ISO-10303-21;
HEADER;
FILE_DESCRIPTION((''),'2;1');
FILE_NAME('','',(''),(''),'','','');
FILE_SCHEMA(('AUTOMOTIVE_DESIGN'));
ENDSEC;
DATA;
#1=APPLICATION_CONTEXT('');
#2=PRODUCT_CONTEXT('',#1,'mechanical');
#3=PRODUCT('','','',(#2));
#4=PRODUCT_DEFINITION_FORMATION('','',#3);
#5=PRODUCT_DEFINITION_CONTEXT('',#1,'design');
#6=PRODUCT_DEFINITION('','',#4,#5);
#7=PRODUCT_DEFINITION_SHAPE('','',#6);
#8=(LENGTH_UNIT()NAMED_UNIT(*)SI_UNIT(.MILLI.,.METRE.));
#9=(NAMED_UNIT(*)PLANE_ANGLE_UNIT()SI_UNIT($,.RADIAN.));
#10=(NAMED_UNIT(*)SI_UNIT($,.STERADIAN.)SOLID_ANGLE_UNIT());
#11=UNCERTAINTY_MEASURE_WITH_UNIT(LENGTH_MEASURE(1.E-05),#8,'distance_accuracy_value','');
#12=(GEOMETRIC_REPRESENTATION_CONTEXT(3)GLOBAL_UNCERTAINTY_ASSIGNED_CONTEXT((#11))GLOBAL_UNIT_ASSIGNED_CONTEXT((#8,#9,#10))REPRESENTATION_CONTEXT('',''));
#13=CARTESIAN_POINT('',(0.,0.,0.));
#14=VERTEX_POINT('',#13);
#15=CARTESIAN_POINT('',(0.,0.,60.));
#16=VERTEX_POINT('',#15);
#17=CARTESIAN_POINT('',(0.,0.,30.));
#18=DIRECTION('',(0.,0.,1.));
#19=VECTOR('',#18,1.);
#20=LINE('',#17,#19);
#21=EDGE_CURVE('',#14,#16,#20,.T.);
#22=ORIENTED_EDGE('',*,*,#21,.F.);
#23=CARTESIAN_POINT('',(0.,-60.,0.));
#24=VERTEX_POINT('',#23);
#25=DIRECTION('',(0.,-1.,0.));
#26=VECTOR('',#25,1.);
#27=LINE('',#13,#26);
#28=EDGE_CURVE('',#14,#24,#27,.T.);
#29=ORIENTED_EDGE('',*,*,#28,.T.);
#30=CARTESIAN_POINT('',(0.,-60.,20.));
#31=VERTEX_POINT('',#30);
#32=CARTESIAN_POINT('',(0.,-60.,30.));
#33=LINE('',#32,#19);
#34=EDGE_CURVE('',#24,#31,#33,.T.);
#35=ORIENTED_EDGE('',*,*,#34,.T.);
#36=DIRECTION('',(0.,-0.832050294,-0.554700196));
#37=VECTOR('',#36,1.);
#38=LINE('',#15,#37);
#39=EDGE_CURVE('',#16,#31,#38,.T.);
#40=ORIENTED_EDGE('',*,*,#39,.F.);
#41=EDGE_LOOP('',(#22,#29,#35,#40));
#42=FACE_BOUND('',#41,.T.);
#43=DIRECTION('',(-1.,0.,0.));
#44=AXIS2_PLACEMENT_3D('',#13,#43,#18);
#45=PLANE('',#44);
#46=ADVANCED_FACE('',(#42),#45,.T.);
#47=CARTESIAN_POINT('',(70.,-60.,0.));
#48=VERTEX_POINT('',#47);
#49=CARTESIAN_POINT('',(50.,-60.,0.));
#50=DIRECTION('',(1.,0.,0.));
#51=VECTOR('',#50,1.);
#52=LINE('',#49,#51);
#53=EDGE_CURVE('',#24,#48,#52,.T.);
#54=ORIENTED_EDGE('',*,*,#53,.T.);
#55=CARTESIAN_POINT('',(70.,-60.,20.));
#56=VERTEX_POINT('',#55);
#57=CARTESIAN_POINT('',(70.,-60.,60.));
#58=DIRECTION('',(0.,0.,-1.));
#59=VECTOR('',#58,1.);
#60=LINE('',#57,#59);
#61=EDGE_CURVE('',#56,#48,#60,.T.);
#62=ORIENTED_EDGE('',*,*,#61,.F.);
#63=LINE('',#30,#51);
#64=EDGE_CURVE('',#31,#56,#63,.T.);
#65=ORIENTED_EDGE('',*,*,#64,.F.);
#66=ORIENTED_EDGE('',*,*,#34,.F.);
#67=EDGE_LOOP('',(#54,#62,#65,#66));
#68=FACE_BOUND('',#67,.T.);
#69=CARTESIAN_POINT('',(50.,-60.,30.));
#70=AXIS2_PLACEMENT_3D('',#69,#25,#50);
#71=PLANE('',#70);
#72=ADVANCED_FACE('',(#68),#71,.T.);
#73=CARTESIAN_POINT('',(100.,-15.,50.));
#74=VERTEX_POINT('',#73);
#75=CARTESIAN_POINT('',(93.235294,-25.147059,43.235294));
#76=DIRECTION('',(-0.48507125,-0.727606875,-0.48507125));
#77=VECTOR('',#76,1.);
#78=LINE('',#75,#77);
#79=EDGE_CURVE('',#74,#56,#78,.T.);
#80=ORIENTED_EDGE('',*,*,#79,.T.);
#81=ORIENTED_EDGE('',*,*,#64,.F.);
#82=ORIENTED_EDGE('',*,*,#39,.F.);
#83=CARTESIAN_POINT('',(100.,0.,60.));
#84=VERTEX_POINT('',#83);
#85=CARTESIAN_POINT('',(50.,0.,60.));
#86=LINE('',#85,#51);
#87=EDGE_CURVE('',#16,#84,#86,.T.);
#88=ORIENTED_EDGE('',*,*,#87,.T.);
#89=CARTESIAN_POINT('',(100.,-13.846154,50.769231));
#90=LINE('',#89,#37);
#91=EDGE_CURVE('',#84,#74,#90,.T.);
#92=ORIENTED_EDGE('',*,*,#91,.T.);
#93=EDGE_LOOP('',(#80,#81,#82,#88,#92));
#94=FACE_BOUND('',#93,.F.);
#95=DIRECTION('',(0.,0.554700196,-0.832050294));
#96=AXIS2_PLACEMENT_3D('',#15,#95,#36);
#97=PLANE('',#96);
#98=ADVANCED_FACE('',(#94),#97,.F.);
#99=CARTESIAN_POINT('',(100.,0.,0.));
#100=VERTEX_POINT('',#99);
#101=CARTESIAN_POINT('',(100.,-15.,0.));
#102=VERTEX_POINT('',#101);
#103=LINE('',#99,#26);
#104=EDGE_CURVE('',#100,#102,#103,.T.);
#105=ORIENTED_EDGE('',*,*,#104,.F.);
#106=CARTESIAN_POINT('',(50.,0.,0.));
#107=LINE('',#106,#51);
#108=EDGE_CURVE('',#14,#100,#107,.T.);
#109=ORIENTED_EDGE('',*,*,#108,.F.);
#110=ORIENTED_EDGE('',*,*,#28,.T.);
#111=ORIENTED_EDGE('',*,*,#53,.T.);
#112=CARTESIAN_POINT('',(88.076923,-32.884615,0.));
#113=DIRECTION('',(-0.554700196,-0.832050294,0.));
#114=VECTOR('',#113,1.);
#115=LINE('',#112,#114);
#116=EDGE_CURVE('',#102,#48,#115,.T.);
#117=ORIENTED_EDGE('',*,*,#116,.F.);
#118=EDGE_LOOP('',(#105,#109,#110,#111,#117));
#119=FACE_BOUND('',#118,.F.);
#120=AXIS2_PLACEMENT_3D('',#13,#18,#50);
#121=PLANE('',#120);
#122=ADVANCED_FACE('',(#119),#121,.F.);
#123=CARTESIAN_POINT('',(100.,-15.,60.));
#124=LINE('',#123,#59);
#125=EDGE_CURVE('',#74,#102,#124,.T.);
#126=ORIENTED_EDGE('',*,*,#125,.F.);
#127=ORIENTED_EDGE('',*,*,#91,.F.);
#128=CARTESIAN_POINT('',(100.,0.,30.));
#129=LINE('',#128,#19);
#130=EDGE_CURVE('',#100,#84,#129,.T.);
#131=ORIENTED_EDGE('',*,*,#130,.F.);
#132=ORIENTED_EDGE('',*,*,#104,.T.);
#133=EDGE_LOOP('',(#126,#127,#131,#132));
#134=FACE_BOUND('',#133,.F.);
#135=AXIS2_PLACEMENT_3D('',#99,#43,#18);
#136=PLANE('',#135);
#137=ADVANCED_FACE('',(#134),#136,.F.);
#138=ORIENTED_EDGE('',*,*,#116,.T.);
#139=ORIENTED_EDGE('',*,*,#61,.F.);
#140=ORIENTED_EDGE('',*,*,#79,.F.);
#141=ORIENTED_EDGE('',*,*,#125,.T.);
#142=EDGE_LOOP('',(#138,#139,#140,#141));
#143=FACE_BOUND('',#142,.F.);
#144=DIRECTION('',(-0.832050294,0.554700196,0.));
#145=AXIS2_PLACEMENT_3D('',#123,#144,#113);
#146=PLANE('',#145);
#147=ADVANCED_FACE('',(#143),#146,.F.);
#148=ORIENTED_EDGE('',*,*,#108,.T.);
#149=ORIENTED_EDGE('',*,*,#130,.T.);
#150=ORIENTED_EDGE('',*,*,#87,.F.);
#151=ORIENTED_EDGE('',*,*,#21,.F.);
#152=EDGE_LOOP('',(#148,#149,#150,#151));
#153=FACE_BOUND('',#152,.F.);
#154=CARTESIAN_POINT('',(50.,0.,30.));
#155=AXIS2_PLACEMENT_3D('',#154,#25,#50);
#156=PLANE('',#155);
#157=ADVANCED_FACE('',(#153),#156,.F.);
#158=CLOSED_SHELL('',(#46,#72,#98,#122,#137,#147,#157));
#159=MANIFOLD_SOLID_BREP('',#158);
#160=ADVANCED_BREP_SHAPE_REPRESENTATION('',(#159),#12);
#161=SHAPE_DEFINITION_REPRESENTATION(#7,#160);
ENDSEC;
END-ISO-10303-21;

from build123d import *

# Parameters (mm, degrees)
F0_W     = 100
F0_H     = 60
F1_DEPTH = 60
F4_DEPTH = 60.001
F5_DEPTH = 100.001


# Not quite as in the source:
# - a feature names something its author has since deleted; it is built from what else it names


with BuildPart() as f1:
    # F0 (on Front) → F1 (new body)
    with BuildSketch(Plane.XZ):
        with Locations((50, 30)):
            Rectangle(F0_W, F0_H)
    extrude(amount=F1_DEPTH)

    # F3 (on face) → F4 (cut, through all)
    with BuildSketch(Plane.XY.offset(60)):
        Polygon((100, -60), (100, -15), (70, -60), align=None)
    extrude(amount=-F4_DEPTH, mode=Mode.SUBTRACT)

    # F2 (on face) → F5 (cut, through all)
    with BuildSketch(Plane(origin=(0, 0, 0), x_dir=(0, -1, 0), z_dir=(-1, 0, 0))):
        Polygon((60, 60), (0, 60), (60, 20), align=None)
    extrude(amount=-F5_DEPTH, mode=Mode.SUBTRACT)


solid = f1.part
